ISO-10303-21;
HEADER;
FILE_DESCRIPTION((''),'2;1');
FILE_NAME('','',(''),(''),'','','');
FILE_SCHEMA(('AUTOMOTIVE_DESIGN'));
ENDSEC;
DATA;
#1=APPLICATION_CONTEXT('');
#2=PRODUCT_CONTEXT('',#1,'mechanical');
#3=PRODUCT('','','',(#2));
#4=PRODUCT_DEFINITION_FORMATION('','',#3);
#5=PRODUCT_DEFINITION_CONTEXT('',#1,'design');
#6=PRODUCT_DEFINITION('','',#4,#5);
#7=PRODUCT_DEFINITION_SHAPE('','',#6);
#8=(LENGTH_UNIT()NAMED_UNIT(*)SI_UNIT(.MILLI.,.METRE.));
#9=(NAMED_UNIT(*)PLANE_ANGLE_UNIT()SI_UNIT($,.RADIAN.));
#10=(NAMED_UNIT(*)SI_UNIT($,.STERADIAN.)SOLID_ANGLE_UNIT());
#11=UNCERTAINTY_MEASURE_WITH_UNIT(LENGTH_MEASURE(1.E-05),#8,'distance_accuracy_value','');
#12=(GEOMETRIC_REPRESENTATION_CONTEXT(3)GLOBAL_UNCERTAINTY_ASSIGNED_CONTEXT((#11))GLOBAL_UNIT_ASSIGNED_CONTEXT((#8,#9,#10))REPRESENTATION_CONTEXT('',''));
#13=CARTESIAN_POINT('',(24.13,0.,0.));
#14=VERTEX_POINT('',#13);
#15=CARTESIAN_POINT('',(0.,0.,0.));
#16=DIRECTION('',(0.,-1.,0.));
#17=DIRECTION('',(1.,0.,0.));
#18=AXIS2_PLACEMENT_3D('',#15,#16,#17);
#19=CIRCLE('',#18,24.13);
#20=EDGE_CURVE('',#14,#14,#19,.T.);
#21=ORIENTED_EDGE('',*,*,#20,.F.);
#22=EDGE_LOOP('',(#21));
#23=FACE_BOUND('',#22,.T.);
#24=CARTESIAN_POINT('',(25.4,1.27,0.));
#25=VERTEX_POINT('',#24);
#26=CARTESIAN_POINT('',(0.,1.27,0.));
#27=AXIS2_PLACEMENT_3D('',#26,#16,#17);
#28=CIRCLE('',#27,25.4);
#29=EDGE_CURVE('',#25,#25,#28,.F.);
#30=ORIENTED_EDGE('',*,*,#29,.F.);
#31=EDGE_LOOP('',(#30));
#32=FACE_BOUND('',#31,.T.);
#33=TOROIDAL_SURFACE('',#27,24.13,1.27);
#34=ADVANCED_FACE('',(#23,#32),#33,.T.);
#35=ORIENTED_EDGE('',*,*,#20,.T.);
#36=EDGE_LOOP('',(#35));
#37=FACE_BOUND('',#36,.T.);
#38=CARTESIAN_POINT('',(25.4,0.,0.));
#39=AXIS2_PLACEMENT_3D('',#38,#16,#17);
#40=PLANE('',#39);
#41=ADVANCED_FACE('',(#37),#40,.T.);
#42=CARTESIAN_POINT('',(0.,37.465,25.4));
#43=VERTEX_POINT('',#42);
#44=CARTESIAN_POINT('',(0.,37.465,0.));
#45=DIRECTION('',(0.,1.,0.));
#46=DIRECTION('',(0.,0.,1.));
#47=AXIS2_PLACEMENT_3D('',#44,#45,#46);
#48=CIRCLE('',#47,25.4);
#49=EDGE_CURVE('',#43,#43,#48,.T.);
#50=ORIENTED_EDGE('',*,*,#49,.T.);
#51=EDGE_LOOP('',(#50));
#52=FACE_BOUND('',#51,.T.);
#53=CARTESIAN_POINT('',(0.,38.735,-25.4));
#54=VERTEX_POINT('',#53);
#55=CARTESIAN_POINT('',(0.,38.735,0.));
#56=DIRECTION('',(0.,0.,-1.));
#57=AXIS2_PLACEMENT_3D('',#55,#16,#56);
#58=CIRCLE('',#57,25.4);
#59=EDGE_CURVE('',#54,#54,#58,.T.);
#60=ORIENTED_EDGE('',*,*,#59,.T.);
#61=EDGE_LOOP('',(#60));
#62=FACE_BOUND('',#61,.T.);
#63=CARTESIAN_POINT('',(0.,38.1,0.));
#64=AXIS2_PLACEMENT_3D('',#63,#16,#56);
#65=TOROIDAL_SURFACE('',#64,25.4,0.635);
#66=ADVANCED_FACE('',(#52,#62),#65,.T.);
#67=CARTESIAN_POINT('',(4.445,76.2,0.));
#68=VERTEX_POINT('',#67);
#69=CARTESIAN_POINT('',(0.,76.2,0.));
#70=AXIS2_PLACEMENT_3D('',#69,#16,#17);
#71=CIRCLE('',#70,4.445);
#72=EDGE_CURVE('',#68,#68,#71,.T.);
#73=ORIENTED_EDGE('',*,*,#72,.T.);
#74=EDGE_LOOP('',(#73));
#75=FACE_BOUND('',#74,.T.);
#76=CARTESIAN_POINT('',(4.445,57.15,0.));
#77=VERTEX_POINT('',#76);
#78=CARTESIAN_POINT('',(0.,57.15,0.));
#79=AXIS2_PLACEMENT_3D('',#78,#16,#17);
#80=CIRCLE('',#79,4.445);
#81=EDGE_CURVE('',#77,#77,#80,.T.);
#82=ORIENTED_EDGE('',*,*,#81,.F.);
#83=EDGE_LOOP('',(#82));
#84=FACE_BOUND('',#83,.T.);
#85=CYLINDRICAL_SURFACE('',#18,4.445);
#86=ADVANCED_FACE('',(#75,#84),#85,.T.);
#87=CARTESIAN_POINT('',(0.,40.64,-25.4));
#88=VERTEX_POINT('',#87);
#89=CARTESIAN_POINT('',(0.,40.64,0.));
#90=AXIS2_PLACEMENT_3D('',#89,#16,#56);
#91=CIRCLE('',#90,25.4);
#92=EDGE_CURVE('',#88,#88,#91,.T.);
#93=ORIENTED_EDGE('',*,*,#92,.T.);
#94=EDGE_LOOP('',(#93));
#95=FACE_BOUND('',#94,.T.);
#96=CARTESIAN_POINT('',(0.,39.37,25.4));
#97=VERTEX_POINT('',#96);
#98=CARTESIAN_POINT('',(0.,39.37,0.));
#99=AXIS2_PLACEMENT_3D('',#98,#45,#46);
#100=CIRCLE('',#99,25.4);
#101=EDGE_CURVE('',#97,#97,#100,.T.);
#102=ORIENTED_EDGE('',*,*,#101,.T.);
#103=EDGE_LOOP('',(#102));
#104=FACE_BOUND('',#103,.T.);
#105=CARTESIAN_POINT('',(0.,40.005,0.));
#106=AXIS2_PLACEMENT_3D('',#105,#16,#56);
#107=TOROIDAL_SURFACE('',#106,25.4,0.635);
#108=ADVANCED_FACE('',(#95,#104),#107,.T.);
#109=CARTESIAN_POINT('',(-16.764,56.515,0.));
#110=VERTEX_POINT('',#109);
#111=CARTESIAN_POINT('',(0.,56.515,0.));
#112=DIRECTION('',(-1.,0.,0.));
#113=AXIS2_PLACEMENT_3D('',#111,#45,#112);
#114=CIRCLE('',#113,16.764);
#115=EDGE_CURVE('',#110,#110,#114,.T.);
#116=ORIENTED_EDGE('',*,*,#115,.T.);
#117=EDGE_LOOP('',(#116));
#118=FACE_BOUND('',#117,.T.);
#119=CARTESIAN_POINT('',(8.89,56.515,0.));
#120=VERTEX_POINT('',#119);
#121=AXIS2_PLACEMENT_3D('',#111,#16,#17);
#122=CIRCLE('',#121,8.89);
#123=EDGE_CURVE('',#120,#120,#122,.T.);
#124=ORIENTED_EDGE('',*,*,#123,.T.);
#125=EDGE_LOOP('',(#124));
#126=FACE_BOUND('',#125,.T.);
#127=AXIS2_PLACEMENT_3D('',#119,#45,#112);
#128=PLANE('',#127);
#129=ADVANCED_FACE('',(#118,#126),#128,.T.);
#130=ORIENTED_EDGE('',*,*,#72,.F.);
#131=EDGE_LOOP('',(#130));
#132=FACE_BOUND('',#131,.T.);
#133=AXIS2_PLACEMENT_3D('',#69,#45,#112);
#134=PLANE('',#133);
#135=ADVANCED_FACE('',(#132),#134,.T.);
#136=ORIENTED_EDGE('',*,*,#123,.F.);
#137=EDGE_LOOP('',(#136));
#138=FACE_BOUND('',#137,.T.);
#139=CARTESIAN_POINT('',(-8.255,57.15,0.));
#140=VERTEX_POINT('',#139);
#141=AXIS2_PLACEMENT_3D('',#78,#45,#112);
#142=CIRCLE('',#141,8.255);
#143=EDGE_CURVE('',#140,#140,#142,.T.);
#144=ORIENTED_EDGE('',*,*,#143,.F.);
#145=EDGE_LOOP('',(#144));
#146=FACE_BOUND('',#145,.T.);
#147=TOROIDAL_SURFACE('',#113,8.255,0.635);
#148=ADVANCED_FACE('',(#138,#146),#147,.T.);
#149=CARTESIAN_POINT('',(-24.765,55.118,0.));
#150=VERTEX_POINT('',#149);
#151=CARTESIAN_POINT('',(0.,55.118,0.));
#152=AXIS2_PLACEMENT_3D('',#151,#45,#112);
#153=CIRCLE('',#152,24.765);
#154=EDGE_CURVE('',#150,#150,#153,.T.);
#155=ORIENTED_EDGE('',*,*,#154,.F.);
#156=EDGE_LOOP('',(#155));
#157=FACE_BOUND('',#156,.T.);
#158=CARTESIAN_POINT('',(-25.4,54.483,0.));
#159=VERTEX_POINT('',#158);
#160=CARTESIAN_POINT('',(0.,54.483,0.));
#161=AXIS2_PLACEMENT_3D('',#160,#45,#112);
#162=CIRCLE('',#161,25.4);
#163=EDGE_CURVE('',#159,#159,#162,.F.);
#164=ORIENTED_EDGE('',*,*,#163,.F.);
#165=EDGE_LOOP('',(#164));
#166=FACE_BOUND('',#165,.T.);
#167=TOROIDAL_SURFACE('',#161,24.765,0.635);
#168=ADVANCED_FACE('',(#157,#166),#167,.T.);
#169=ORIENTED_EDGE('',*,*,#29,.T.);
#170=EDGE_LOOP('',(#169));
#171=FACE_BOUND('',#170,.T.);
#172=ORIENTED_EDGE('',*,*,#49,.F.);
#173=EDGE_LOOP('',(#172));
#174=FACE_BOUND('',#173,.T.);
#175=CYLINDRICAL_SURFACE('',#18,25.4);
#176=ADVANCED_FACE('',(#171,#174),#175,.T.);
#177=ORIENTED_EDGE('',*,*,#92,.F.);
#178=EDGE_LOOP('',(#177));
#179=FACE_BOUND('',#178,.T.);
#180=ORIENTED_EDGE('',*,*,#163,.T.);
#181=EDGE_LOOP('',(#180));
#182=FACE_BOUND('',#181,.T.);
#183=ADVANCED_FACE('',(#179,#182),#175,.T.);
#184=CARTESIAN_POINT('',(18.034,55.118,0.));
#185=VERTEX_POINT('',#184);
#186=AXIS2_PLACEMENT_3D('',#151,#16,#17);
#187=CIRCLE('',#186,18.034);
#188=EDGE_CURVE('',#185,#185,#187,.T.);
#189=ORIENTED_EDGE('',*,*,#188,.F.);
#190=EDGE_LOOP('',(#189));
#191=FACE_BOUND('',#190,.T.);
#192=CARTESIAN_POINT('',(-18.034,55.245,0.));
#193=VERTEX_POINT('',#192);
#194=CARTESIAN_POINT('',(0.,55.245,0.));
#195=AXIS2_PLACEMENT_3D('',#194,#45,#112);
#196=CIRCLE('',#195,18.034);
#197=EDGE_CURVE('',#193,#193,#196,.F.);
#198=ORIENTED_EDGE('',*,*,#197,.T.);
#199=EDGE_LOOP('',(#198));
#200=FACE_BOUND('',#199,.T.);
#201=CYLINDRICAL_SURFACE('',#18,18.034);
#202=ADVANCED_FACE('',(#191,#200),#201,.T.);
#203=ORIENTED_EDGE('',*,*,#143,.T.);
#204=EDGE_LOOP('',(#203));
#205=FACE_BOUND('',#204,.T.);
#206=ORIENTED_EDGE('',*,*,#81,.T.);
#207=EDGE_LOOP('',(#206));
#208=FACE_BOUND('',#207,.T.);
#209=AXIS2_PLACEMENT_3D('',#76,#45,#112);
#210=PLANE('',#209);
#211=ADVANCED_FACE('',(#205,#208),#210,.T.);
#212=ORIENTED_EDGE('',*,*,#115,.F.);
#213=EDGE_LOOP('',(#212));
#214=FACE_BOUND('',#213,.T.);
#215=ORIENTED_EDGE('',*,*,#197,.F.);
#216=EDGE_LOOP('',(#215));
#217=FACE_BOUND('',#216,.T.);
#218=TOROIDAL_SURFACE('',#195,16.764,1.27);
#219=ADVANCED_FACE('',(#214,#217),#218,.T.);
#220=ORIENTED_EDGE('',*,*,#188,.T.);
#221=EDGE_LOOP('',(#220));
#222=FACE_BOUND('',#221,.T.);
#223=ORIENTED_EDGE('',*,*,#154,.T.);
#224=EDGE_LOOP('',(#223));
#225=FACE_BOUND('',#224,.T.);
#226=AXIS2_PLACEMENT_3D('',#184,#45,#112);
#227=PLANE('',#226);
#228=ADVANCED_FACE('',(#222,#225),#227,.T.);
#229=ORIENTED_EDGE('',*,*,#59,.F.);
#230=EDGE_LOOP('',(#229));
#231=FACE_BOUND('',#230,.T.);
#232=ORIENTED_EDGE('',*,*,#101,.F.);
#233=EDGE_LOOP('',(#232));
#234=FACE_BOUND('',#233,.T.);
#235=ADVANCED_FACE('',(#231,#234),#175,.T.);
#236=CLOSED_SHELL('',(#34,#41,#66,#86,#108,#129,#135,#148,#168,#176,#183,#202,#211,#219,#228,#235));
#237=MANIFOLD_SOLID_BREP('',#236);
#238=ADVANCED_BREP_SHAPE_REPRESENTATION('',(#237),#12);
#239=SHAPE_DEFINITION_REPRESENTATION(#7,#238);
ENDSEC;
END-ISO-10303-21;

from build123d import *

# Parameters (mm, degrees)
SKETCH2_R = 0.635
FILLET1_R = 0.635
FILLET2_R = 1.27
FILLET3_R = 0.635


with BuildPart() as part:
    # Sketch1 → Revolve1 (revolve)
    with BuildSketch(Plane.XY):
        Polygon((0, 0), (0, 76.2), (4.445, 76.2), (4.445, 57.15), (8.89, 57.15), (8.89, 56.515), (18.034, 56.515), (18.034, 55.118), (25.4, 55.118), (25.4, 0), align=None)
    revolve(axis=Axis((0, 0, 0), (0, 1, 0)))

    # Sketch2 → Revolve2 (revolve)
    with BuildSketch(Plane.XY, mode=Mode.PRIVATE) as revolve2_sk:
        with Locations((25.4, 40.005)):
            Circle(SKETCH2_R)
        with Locations((25.4, 38.1)):
            Circle(SKETCH2_R)
    revolve(revolve2_sk.sketch.rotate(Axis((0, 0, 0), (0, 1, 0)), 90), axis=Axis((0, 0, 0), (0, 1, 0)))

    # Fillet1
    fillet1_edges = [part.edges().sort_by_distance(p)[0] for p in [
        (-8.89, 57.15, 0),
    ]]
    fillet(fillet1_edges, radius=FILLET1_R - 0.0001)  # a hair under: the kernel refuses the full size

    # Fillet2
    fillet2_edges = [part.edges().sort_by_distance(p)[0] for p in [
        (-25.4, 0, 0),
        (-18.034, 56.515, 0),
    ]]
    fillet(fillet2_edges, radius=FILLET2_R)

    # Fillet3
    fillet3_edges = [part.edges().sort_by_distance(p)[0] for p in [
        (-25.4, 55.118, 0),
    ]]
    fillet(fillet3_edges, radius=FILLET3_R)


solid = part.part
